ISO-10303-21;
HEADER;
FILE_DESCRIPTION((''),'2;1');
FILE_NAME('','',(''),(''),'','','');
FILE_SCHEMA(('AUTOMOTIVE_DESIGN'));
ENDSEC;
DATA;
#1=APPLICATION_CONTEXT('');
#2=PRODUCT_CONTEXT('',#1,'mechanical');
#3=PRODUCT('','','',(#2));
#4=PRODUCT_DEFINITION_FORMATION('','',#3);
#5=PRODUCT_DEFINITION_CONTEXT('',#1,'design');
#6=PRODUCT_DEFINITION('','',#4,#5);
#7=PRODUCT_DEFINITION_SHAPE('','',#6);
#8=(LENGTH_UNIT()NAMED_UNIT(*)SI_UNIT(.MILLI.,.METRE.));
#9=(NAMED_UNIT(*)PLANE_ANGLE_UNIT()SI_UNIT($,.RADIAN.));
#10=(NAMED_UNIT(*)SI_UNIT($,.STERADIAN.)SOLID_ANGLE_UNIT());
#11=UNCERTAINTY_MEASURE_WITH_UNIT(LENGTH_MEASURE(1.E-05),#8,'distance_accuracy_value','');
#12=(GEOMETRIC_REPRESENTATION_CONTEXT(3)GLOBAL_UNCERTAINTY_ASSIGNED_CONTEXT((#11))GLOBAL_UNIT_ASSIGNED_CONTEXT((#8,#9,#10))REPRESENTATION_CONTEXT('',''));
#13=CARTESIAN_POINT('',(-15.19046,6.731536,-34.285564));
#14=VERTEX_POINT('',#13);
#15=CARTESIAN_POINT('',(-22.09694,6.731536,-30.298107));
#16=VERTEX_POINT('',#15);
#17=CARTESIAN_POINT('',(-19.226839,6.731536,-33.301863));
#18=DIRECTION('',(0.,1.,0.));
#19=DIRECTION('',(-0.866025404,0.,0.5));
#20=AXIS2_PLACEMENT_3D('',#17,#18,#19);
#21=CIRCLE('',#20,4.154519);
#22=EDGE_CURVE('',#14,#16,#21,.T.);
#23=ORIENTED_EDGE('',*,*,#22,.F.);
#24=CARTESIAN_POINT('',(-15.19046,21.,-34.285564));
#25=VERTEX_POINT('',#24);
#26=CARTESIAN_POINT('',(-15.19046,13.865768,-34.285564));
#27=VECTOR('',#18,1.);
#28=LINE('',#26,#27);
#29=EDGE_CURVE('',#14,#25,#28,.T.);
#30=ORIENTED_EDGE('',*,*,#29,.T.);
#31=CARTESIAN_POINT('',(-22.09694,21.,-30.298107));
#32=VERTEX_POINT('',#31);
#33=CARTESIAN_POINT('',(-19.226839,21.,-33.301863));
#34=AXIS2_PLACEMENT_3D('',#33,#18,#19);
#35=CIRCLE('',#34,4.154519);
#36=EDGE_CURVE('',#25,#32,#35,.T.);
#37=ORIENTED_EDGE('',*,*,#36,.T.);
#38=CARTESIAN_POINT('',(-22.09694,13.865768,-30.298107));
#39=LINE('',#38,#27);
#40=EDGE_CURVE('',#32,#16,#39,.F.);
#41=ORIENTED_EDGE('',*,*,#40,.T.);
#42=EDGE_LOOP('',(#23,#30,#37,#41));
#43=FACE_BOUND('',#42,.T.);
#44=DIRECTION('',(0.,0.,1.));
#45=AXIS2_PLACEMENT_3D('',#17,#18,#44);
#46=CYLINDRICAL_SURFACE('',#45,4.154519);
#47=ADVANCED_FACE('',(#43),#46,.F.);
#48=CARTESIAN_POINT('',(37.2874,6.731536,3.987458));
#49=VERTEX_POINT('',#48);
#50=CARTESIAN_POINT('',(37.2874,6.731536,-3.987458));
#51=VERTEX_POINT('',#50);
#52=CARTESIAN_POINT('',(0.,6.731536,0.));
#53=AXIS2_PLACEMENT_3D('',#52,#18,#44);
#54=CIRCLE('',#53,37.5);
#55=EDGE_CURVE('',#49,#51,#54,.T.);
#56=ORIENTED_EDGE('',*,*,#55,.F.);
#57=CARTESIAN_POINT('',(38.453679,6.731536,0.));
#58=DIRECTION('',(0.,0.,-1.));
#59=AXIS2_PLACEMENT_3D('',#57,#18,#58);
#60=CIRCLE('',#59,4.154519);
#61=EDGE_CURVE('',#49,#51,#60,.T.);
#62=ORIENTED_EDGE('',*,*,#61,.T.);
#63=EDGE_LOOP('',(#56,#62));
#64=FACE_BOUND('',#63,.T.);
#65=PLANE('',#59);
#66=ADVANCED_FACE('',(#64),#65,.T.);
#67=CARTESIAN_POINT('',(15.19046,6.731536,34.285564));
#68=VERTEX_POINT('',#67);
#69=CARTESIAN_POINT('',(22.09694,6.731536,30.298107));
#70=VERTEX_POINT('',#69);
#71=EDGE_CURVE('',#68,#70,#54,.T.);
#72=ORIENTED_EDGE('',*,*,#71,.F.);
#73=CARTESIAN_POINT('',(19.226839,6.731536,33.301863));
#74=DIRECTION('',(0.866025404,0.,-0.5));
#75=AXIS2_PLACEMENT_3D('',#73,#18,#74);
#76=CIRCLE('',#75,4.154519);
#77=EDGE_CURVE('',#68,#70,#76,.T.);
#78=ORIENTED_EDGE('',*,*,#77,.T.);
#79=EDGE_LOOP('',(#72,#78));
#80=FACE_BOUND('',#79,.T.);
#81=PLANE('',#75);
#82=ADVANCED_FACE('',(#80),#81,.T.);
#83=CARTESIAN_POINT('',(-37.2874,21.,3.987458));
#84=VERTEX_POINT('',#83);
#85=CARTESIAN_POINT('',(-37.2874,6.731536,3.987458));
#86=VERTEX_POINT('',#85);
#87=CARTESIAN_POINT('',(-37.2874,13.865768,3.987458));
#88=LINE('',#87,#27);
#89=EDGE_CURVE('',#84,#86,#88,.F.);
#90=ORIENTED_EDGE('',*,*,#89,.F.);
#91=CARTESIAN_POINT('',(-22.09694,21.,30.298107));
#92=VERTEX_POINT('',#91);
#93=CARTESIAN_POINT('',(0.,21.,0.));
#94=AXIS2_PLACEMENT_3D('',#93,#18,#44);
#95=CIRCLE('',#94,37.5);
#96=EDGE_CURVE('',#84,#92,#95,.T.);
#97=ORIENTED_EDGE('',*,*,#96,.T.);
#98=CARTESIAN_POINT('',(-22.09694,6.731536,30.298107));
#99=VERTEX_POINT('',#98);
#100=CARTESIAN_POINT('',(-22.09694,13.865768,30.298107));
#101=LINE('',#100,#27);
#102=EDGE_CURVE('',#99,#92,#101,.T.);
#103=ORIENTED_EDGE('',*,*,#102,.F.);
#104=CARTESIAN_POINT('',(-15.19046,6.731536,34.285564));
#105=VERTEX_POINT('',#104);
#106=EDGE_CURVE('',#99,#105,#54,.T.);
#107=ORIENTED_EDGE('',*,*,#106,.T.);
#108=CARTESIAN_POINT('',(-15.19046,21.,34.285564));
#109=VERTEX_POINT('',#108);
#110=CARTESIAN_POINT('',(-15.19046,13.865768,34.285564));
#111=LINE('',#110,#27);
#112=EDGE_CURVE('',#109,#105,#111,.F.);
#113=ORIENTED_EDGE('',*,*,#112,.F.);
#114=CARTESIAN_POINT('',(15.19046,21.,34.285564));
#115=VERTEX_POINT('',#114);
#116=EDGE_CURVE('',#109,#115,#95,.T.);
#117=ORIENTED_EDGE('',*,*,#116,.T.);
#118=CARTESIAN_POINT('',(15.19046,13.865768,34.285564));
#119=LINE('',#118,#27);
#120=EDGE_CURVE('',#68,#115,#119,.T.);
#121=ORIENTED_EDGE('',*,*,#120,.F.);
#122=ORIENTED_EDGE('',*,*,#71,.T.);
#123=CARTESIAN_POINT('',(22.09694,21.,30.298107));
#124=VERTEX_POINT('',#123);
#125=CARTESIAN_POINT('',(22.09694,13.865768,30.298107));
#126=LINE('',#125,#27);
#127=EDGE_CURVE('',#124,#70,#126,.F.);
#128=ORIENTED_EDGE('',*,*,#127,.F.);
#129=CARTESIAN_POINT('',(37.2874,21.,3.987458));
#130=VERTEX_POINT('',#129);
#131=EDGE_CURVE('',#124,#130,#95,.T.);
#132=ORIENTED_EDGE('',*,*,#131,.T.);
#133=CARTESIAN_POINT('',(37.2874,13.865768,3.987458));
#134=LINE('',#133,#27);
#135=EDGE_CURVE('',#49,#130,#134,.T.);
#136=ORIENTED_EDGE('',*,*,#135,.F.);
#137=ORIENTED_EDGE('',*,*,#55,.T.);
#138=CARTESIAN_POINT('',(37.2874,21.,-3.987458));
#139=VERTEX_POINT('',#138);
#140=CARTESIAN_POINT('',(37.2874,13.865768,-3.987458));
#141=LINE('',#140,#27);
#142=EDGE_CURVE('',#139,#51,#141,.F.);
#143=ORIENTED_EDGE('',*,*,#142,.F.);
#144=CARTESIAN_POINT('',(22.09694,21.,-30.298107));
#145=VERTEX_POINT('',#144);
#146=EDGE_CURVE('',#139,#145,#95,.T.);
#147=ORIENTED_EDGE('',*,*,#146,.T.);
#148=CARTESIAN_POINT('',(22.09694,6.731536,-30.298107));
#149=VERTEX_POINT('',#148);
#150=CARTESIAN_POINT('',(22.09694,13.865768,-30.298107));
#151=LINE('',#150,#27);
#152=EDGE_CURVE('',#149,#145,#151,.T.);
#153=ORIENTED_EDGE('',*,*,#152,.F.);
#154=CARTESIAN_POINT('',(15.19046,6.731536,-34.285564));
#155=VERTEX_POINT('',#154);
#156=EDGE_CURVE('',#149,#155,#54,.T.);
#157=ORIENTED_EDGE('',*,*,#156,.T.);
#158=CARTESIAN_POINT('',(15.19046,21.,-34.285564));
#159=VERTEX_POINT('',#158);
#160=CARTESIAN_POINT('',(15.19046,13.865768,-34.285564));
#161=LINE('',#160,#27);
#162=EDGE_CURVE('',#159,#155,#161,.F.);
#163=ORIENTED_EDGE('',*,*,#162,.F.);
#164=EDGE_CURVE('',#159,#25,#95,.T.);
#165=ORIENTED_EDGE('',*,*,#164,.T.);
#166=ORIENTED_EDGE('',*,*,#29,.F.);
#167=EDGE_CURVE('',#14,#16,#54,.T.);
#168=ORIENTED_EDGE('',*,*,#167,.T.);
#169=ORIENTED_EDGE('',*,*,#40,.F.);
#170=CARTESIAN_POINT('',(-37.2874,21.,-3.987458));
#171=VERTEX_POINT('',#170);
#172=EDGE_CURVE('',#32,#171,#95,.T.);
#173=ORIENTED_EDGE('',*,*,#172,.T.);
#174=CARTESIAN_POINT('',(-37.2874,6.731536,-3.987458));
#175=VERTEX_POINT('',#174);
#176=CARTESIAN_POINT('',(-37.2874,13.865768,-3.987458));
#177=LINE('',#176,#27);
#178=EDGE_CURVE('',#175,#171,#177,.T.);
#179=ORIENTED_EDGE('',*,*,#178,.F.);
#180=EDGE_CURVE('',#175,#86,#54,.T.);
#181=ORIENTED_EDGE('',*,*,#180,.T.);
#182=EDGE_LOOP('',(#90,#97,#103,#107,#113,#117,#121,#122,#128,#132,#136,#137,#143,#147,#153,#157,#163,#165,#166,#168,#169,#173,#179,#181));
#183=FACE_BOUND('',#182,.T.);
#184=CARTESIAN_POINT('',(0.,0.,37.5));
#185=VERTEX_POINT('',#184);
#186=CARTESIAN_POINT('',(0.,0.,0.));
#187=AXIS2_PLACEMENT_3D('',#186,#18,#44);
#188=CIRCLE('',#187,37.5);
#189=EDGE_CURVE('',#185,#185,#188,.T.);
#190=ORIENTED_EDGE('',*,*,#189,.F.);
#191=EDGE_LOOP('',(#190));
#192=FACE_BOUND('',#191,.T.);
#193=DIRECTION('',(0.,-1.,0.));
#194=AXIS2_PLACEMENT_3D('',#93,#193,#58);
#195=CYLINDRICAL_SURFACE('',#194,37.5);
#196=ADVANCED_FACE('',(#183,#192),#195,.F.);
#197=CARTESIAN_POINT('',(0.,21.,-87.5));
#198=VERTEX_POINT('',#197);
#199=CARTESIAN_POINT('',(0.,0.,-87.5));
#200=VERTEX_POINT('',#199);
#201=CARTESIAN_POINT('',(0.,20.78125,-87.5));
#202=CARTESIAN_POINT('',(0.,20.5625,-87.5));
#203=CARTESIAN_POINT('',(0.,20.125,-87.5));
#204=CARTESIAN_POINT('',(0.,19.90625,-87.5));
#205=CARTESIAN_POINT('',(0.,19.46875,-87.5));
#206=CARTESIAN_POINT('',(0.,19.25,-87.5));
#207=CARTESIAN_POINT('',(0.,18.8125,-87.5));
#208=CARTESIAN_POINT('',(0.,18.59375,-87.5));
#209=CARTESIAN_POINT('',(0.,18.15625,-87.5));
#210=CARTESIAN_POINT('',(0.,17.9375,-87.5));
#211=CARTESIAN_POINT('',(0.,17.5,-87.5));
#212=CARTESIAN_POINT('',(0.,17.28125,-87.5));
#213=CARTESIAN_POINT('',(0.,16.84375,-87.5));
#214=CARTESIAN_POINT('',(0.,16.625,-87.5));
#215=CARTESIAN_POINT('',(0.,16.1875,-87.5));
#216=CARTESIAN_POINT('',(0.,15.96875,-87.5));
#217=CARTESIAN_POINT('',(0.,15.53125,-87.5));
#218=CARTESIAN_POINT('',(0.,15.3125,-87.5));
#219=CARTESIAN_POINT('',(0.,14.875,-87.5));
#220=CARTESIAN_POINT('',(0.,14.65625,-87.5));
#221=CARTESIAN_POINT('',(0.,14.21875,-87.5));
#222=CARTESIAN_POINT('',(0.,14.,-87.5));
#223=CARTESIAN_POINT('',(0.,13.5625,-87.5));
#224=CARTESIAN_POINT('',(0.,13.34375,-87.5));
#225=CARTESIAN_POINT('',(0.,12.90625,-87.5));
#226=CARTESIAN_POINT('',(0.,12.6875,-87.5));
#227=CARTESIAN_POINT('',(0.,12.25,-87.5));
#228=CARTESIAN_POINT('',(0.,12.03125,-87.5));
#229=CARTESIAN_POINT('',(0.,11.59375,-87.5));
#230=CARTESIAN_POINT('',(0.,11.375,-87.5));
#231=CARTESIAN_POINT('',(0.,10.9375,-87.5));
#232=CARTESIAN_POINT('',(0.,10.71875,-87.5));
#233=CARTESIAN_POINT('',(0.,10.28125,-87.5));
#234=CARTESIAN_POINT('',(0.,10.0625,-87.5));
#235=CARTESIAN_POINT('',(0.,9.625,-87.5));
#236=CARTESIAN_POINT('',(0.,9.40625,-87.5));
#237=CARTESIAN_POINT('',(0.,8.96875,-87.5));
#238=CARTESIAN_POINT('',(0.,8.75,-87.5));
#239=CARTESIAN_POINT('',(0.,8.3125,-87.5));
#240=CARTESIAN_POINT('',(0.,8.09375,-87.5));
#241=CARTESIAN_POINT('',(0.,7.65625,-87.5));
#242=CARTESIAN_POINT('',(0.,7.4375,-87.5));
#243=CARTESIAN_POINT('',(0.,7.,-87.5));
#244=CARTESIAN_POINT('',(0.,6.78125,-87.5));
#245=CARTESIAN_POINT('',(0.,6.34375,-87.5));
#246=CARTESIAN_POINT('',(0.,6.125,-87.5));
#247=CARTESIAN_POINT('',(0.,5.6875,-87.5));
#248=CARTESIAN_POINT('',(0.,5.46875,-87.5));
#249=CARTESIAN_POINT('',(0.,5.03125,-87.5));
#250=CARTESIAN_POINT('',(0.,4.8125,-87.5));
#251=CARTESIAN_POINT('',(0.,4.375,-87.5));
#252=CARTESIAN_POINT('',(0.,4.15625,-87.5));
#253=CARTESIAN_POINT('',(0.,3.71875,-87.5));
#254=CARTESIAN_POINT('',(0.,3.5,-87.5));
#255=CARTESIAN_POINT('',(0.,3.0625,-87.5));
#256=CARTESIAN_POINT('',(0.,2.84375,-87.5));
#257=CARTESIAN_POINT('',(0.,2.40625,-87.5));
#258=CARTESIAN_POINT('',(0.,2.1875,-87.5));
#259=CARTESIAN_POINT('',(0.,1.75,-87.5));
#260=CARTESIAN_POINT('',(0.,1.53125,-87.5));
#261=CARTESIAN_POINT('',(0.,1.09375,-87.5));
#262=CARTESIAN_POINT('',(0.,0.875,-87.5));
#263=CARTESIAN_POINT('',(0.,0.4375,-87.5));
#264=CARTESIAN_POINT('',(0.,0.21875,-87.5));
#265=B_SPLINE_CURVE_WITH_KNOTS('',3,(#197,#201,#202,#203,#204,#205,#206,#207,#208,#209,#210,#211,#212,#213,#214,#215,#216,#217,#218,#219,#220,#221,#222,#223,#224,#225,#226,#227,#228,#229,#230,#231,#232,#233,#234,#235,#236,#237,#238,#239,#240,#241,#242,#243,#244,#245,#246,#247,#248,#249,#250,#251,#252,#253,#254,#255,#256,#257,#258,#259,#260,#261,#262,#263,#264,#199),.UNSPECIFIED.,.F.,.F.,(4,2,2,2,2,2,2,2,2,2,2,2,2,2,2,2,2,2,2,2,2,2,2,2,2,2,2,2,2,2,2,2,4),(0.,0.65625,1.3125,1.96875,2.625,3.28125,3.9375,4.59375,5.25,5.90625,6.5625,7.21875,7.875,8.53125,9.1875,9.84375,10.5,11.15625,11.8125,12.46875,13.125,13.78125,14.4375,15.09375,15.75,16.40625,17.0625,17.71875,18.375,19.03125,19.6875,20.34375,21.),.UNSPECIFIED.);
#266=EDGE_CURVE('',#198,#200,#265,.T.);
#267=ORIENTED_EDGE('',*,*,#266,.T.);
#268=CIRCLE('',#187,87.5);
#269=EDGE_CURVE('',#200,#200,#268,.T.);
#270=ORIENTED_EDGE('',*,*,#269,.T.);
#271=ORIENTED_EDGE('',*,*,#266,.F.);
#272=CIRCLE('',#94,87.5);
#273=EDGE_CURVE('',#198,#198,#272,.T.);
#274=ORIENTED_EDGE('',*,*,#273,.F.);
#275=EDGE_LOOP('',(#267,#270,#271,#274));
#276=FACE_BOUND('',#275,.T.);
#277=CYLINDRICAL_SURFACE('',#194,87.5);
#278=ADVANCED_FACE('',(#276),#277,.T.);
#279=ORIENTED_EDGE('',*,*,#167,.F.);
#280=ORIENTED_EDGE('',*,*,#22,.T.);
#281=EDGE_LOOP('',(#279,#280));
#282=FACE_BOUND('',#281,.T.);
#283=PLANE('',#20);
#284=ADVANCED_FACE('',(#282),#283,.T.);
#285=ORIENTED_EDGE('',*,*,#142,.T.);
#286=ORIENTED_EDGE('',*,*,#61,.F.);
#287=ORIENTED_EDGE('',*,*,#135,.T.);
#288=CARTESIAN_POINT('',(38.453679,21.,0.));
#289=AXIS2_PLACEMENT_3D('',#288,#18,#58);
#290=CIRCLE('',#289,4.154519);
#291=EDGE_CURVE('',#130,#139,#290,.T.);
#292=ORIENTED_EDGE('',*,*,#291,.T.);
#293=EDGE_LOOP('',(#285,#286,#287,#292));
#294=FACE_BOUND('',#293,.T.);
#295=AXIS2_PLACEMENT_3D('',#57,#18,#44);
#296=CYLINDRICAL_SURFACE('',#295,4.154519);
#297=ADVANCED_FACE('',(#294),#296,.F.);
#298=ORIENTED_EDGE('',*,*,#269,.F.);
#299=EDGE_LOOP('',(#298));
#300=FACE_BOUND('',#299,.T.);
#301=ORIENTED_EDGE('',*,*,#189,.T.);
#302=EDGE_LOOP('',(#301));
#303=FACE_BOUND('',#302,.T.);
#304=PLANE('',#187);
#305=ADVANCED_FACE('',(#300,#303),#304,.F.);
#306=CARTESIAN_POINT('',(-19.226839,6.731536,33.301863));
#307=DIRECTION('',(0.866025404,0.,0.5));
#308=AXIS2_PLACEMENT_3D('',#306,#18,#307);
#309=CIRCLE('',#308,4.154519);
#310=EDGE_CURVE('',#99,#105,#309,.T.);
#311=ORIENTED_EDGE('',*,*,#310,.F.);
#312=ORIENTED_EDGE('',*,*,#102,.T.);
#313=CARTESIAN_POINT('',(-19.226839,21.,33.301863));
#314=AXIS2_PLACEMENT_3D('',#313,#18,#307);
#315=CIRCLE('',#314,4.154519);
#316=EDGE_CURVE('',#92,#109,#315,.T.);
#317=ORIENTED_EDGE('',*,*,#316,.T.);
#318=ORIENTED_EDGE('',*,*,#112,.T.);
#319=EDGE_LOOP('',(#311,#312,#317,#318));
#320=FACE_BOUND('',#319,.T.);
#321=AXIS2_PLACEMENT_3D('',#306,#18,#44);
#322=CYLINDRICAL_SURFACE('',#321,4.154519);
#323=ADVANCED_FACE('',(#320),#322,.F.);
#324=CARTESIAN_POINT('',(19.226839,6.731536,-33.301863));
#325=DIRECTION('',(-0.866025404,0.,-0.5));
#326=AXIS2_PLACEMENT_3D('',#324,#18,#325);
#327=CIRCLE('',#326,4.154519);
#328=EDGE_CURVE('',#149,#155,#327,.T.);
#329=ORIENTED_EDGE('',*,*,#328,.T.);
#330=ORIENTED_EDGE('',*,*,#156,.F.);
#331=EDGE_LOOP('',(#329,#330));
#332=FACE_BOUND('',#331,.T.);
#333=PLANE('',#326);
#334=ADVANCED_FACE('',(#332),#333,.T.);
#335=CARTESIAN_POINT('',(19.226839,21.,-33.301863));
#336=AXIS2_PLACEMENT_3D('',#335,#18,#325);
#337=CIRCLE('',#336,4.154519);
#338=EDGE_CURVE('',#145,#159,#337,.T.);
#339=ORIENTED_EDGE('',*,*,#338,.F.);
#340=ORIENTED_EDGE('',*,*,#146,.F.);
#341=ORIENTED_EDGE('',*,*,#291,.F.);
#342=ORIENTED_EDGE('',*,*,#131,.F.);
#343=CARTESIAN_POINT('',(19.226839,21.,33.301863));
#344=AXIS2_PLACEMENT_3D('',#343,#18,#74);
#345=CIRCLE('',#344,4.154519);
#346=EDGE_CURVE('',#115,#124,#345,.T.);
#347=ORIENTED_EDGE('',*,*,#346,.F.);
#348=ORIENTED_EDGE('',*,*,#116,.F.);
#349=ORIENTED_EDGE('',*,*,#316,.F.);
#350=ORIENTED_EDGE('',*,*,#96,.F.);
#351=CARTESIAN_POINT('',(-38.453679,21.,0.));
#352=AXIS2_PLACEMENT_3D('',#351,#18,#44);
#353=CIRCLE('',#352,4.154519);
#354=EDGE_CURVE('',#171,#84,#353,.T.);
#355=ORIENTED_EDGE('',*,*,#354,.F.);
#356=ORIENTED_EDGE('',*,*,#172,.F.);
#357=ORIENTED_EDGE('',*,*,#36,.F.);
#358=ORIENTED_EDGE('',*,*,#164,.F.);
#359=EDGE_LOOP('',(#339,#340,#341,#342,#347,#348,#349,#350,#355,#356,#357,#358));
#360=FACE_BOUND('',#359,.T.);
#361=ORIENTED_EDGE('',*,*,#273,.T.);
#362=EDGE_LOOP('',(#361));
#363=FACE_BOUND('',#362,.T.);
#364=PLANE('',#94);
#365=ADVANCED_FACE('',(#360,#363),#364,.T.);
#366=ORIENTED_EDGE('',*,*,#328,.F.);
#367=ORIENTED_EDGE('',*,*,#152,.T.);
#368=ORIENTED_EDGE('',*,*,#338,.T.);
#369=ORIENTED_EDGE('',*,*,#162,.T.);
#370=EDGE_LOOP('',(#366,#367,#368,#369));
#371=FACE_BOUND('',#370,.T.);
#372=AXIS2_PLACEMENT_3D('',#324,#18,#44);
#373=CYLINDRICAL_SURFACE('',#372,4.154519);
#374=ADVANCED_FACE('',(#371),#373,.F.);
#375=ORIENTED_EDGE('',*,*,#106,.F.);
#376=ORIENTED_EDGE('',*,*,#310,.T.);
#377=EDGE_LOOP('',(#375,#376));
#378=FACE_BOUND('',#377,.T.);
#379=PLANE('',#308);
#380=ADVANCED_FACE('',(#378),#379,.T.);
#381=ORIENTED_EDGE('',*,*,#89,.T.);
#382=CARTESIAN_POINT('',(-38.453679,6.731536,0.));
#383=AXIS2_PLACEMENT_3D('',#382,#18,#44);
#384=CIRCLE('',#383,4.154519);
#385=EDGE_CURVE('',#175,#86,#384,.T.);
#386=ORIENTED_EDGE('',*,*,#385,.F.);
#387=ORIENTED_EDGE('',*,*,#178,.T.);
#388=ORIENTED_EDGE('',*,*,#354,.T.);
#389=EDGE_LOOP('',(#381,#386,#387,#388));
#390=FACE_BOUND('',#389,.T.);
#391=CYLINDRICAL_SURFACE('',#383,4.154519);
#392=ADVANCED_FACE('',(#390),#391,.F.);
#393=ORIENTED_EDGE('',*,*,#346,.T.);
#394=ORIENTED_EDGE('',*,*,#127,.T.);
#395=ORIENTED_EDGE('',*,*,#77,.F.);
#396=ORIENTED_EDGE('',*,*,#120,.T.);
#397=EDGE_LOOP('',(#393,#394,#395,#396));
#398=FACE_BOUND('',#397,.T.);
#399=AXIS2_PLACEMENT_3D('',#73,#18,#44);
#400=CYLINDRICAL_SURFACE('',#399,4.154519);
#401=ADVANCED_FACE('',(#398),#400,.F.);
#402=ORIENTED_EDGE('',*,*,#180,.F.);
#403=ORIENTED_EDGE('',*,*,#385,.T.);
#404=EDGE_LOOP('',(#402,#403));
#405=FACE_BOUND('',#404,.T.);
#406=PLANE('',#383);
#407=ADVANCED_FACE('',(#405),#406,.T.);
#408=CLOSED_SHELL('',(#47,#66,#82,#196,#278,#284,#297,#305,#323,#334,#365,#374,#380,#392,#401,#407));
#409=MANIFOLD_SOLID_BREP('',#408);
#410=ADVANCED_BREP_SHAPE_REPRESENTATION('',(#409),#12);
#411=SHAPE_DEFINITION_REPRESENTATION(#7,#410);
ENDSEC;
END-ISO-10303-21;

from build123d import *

# Parameters (mm, degrees)
SKETCH1_R           = 87.5
BOSS_EXTRUDE1_DEPTH = 21
SKETCH2_R           = 37.5
CUT_EXTRUDE1_DEPTH  = 126.512947539
SKETCH3_R           = 4.154518723
CUT_EXTRUDE2_DEPTH  = 14.268463859
CIRPATTERN1_COUNT   = 6


with BuildPart() as part:
    # Sketch1 → Boss-Extrude1 (new body)
    with BuildSketch(Plane(origin=(0, 0, 0), x_dir=(1, 0, 0), z_dir=(0, 1, 0))):
        Circle(SKETCH1_R)
    extrude(amount=BOSS_EXTRUDE1_DEPTH)

    # Sketch2 → Cut-Extrude1 (cut, through all)
    with BuildSketch(Plane(origin=(0, 0, 0), x_dir=(1, 0, 0), z_dir=(0, 1, 0))):
        Circle(SKETCH2_R)
    extrude(amount=CUT_EXTRUDE1_DEPTH, mode=Mode.SUBTRACT)

    # Sketch3 → Cut-Extrude2 (cut)
    with BuildSketch(Plane(origin=(0, 21, 0), x_dir=(1, 0, 0), z_dir=(0, 1, 0))):
        with Locations((-38.453678789, 0)):
            Circle(SKETCH3_R)
    cut_extrude2 = extrude(amount=-CUT_EXTRUDE2_DEPTH, mode=Mode.SUBTRACT)

    # CirPattern1: Cut-Extrude2 ×6 about axis
    cirpattern1_axis = Axis((0, 0, 0), (0, 1, 0))
    for i in range(1, CIRPATTERN1_COUNT):
        add(cut_extrude2.rotate(cirpattern1_axis, i * 360 / CIRPATTERN1_COUNT), mode=Mode.SUBTRACT)


solid = part.part
